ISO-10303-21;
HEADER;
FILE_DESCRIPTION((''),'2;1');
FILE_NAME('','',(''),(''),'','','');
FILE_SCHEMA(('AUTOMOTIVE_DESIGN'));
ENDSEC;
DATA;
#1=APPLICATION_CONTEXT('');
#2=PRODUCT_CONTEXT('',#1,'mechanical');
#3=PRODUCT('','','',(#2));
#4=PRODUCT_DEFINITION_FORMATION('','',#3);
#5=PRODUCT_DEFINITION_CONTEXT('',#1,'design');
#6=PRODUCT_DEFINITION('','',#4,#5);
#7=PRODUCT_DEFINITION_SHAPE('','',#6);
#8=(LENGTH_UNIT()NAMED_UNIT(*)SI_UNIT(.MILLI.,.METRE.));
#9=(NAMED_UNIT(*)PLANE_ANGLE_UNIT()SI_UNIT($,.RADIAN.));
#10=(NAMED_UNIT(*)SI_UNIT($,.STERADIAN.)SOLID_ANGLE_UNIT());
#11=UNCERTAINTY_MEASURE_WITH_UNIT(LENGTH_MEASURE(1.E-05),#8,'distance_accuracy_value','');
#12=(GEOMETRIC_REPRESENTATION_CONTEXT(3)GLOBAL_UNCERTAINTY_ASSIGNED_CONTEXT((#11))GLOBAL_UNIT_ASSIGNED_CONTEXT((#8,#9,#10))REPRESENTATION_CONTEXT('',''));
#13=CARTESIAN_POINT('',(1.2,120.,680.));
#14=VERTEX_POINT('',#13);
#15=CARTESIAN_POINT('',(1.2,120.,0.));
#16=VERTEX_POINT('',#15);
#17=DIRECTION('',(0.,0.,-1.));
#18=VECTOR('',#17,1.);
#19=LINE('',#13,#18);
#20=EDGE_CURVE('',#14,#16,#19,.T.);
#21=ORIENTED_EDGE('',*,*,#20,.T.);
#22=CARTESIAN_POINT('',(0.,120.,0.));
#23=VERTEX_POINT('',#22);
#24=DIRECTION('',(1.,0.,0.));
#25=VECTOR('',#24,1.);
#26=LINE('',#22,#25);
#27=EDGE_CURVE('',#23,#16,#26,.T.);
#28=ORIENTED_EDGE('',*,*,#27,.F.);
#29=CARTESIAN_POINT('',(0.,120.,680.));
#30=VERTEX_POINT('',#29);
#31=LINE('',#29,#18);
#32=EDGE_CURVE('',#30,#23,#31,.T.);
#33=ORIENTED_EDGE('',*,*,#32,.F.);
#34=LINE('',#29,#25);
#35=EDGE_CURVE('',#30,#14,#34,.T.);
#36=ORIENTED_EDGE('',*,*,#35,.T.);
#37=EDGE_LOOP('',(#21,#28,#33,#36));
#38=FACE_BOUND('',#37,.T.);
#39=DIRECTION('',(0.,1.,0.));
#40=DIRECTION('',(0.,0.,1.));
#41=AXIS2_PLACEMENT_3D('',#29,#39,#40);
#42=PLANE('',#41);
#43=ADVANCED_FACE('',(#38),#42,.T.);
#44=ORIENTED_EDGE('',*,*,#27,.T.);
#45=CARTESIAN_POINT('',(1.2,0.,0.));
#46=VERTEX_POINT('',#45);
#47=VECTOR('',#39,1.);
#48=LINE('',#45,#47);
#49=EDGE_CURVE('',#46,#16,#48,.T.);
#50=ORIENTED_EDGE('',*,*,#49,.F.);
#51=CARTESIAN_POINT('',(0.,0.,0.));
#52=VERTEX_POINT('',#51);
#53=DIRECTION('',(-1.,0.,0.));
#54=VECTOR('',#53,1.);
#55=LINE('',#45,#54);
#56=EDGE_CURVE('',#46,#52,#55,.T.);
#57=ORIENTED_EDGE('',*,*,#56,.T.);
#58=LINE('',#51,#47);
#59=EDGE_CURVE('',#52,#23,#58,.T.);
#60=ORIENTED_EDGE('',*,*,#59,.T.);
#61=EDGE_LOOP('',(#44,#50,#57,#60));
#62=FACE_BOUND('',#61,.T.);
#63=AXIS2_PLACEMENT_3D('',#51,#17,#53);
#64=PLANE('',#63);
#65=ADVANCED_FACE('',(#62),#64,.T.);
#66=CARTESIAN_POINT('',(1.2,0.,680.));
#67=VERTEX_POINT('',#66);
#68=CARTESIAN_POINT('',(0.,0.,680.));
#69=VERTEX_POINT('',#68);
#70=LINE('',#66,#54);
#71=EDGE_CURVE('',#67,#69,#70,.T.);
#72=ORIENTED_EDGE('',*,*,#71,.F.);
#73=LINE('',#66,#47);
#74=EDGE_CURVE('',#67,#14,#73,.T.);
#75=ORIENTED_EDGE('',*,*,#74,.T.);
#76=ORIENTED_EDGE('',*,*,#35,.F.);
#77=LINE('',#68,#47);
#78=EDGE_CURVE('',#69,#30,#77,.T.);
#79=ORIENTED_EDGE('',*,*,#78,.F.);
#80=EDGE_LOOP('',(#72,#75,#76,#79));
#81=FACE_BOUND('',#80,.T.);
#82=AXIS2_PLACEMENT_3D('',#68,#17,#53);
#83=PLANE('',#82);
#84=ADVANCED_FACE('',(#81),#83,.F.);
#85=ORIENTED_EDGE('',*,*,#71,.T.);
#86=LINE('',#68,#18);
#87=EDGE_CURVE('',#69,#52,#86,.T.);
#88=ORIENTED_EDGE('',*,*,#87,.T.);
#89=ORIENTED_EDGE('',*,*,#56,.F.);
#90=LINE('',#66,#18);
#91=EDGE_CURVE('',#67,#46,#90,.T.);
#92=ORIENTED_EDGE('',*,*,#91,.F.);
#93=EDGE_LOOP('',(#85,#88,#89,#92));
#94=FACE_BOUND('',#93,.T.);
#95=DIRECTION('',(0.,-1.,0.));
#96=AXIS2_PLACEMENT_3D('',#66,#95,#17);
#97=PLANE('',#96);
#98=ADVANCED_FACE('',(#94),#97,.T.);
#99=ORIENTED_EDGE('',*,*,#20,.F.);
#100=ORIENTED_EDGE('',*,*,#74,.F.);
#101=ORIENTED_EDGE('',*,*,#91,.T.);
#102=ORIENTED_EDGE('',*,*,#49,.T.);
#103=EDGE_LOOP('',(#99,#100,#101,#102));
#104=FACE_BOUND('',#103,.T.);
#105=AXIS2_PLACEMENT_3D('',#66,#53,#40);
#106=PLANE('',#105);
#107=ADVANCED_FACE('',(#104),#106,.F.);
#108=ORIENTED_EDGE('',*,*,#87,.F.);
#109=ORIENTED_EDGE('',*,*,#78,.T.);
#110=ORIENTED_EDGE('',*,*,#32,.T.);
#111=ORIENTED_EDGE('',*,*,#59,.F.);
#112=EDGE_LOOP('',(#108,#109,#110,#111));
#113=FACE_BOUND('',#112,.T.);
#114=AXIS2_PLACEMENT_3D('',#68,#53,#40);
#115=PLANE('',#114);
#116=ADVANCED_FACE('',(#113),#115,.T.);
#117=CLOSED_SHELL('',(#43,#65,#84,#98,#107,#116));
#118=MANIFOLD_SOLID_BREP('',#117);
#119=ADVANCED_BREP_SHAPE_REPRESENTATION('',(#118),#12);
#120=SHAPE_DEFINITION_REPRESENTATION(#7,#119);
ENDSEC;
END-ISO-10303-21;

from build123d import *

# Parameters (mm, degrees)
ESBO_O1_W          = 1.2
ESBO_O1_H          = 120
FLANGE_BASE1_DEPTH = 680


# Sheet-metal steps are written as plain solids
with BuildPart() as part:
    # Esboço1 → Flange-base1 (new body)
    with BuildSketch(Plane.XY):
        with Locations((0.6, 60)):
            Rectangle(ESBO_O1_W, ESBO_O1_H)
    extrude(amount=FLANGE_BASE1_DEPTH)


solid = part.part
